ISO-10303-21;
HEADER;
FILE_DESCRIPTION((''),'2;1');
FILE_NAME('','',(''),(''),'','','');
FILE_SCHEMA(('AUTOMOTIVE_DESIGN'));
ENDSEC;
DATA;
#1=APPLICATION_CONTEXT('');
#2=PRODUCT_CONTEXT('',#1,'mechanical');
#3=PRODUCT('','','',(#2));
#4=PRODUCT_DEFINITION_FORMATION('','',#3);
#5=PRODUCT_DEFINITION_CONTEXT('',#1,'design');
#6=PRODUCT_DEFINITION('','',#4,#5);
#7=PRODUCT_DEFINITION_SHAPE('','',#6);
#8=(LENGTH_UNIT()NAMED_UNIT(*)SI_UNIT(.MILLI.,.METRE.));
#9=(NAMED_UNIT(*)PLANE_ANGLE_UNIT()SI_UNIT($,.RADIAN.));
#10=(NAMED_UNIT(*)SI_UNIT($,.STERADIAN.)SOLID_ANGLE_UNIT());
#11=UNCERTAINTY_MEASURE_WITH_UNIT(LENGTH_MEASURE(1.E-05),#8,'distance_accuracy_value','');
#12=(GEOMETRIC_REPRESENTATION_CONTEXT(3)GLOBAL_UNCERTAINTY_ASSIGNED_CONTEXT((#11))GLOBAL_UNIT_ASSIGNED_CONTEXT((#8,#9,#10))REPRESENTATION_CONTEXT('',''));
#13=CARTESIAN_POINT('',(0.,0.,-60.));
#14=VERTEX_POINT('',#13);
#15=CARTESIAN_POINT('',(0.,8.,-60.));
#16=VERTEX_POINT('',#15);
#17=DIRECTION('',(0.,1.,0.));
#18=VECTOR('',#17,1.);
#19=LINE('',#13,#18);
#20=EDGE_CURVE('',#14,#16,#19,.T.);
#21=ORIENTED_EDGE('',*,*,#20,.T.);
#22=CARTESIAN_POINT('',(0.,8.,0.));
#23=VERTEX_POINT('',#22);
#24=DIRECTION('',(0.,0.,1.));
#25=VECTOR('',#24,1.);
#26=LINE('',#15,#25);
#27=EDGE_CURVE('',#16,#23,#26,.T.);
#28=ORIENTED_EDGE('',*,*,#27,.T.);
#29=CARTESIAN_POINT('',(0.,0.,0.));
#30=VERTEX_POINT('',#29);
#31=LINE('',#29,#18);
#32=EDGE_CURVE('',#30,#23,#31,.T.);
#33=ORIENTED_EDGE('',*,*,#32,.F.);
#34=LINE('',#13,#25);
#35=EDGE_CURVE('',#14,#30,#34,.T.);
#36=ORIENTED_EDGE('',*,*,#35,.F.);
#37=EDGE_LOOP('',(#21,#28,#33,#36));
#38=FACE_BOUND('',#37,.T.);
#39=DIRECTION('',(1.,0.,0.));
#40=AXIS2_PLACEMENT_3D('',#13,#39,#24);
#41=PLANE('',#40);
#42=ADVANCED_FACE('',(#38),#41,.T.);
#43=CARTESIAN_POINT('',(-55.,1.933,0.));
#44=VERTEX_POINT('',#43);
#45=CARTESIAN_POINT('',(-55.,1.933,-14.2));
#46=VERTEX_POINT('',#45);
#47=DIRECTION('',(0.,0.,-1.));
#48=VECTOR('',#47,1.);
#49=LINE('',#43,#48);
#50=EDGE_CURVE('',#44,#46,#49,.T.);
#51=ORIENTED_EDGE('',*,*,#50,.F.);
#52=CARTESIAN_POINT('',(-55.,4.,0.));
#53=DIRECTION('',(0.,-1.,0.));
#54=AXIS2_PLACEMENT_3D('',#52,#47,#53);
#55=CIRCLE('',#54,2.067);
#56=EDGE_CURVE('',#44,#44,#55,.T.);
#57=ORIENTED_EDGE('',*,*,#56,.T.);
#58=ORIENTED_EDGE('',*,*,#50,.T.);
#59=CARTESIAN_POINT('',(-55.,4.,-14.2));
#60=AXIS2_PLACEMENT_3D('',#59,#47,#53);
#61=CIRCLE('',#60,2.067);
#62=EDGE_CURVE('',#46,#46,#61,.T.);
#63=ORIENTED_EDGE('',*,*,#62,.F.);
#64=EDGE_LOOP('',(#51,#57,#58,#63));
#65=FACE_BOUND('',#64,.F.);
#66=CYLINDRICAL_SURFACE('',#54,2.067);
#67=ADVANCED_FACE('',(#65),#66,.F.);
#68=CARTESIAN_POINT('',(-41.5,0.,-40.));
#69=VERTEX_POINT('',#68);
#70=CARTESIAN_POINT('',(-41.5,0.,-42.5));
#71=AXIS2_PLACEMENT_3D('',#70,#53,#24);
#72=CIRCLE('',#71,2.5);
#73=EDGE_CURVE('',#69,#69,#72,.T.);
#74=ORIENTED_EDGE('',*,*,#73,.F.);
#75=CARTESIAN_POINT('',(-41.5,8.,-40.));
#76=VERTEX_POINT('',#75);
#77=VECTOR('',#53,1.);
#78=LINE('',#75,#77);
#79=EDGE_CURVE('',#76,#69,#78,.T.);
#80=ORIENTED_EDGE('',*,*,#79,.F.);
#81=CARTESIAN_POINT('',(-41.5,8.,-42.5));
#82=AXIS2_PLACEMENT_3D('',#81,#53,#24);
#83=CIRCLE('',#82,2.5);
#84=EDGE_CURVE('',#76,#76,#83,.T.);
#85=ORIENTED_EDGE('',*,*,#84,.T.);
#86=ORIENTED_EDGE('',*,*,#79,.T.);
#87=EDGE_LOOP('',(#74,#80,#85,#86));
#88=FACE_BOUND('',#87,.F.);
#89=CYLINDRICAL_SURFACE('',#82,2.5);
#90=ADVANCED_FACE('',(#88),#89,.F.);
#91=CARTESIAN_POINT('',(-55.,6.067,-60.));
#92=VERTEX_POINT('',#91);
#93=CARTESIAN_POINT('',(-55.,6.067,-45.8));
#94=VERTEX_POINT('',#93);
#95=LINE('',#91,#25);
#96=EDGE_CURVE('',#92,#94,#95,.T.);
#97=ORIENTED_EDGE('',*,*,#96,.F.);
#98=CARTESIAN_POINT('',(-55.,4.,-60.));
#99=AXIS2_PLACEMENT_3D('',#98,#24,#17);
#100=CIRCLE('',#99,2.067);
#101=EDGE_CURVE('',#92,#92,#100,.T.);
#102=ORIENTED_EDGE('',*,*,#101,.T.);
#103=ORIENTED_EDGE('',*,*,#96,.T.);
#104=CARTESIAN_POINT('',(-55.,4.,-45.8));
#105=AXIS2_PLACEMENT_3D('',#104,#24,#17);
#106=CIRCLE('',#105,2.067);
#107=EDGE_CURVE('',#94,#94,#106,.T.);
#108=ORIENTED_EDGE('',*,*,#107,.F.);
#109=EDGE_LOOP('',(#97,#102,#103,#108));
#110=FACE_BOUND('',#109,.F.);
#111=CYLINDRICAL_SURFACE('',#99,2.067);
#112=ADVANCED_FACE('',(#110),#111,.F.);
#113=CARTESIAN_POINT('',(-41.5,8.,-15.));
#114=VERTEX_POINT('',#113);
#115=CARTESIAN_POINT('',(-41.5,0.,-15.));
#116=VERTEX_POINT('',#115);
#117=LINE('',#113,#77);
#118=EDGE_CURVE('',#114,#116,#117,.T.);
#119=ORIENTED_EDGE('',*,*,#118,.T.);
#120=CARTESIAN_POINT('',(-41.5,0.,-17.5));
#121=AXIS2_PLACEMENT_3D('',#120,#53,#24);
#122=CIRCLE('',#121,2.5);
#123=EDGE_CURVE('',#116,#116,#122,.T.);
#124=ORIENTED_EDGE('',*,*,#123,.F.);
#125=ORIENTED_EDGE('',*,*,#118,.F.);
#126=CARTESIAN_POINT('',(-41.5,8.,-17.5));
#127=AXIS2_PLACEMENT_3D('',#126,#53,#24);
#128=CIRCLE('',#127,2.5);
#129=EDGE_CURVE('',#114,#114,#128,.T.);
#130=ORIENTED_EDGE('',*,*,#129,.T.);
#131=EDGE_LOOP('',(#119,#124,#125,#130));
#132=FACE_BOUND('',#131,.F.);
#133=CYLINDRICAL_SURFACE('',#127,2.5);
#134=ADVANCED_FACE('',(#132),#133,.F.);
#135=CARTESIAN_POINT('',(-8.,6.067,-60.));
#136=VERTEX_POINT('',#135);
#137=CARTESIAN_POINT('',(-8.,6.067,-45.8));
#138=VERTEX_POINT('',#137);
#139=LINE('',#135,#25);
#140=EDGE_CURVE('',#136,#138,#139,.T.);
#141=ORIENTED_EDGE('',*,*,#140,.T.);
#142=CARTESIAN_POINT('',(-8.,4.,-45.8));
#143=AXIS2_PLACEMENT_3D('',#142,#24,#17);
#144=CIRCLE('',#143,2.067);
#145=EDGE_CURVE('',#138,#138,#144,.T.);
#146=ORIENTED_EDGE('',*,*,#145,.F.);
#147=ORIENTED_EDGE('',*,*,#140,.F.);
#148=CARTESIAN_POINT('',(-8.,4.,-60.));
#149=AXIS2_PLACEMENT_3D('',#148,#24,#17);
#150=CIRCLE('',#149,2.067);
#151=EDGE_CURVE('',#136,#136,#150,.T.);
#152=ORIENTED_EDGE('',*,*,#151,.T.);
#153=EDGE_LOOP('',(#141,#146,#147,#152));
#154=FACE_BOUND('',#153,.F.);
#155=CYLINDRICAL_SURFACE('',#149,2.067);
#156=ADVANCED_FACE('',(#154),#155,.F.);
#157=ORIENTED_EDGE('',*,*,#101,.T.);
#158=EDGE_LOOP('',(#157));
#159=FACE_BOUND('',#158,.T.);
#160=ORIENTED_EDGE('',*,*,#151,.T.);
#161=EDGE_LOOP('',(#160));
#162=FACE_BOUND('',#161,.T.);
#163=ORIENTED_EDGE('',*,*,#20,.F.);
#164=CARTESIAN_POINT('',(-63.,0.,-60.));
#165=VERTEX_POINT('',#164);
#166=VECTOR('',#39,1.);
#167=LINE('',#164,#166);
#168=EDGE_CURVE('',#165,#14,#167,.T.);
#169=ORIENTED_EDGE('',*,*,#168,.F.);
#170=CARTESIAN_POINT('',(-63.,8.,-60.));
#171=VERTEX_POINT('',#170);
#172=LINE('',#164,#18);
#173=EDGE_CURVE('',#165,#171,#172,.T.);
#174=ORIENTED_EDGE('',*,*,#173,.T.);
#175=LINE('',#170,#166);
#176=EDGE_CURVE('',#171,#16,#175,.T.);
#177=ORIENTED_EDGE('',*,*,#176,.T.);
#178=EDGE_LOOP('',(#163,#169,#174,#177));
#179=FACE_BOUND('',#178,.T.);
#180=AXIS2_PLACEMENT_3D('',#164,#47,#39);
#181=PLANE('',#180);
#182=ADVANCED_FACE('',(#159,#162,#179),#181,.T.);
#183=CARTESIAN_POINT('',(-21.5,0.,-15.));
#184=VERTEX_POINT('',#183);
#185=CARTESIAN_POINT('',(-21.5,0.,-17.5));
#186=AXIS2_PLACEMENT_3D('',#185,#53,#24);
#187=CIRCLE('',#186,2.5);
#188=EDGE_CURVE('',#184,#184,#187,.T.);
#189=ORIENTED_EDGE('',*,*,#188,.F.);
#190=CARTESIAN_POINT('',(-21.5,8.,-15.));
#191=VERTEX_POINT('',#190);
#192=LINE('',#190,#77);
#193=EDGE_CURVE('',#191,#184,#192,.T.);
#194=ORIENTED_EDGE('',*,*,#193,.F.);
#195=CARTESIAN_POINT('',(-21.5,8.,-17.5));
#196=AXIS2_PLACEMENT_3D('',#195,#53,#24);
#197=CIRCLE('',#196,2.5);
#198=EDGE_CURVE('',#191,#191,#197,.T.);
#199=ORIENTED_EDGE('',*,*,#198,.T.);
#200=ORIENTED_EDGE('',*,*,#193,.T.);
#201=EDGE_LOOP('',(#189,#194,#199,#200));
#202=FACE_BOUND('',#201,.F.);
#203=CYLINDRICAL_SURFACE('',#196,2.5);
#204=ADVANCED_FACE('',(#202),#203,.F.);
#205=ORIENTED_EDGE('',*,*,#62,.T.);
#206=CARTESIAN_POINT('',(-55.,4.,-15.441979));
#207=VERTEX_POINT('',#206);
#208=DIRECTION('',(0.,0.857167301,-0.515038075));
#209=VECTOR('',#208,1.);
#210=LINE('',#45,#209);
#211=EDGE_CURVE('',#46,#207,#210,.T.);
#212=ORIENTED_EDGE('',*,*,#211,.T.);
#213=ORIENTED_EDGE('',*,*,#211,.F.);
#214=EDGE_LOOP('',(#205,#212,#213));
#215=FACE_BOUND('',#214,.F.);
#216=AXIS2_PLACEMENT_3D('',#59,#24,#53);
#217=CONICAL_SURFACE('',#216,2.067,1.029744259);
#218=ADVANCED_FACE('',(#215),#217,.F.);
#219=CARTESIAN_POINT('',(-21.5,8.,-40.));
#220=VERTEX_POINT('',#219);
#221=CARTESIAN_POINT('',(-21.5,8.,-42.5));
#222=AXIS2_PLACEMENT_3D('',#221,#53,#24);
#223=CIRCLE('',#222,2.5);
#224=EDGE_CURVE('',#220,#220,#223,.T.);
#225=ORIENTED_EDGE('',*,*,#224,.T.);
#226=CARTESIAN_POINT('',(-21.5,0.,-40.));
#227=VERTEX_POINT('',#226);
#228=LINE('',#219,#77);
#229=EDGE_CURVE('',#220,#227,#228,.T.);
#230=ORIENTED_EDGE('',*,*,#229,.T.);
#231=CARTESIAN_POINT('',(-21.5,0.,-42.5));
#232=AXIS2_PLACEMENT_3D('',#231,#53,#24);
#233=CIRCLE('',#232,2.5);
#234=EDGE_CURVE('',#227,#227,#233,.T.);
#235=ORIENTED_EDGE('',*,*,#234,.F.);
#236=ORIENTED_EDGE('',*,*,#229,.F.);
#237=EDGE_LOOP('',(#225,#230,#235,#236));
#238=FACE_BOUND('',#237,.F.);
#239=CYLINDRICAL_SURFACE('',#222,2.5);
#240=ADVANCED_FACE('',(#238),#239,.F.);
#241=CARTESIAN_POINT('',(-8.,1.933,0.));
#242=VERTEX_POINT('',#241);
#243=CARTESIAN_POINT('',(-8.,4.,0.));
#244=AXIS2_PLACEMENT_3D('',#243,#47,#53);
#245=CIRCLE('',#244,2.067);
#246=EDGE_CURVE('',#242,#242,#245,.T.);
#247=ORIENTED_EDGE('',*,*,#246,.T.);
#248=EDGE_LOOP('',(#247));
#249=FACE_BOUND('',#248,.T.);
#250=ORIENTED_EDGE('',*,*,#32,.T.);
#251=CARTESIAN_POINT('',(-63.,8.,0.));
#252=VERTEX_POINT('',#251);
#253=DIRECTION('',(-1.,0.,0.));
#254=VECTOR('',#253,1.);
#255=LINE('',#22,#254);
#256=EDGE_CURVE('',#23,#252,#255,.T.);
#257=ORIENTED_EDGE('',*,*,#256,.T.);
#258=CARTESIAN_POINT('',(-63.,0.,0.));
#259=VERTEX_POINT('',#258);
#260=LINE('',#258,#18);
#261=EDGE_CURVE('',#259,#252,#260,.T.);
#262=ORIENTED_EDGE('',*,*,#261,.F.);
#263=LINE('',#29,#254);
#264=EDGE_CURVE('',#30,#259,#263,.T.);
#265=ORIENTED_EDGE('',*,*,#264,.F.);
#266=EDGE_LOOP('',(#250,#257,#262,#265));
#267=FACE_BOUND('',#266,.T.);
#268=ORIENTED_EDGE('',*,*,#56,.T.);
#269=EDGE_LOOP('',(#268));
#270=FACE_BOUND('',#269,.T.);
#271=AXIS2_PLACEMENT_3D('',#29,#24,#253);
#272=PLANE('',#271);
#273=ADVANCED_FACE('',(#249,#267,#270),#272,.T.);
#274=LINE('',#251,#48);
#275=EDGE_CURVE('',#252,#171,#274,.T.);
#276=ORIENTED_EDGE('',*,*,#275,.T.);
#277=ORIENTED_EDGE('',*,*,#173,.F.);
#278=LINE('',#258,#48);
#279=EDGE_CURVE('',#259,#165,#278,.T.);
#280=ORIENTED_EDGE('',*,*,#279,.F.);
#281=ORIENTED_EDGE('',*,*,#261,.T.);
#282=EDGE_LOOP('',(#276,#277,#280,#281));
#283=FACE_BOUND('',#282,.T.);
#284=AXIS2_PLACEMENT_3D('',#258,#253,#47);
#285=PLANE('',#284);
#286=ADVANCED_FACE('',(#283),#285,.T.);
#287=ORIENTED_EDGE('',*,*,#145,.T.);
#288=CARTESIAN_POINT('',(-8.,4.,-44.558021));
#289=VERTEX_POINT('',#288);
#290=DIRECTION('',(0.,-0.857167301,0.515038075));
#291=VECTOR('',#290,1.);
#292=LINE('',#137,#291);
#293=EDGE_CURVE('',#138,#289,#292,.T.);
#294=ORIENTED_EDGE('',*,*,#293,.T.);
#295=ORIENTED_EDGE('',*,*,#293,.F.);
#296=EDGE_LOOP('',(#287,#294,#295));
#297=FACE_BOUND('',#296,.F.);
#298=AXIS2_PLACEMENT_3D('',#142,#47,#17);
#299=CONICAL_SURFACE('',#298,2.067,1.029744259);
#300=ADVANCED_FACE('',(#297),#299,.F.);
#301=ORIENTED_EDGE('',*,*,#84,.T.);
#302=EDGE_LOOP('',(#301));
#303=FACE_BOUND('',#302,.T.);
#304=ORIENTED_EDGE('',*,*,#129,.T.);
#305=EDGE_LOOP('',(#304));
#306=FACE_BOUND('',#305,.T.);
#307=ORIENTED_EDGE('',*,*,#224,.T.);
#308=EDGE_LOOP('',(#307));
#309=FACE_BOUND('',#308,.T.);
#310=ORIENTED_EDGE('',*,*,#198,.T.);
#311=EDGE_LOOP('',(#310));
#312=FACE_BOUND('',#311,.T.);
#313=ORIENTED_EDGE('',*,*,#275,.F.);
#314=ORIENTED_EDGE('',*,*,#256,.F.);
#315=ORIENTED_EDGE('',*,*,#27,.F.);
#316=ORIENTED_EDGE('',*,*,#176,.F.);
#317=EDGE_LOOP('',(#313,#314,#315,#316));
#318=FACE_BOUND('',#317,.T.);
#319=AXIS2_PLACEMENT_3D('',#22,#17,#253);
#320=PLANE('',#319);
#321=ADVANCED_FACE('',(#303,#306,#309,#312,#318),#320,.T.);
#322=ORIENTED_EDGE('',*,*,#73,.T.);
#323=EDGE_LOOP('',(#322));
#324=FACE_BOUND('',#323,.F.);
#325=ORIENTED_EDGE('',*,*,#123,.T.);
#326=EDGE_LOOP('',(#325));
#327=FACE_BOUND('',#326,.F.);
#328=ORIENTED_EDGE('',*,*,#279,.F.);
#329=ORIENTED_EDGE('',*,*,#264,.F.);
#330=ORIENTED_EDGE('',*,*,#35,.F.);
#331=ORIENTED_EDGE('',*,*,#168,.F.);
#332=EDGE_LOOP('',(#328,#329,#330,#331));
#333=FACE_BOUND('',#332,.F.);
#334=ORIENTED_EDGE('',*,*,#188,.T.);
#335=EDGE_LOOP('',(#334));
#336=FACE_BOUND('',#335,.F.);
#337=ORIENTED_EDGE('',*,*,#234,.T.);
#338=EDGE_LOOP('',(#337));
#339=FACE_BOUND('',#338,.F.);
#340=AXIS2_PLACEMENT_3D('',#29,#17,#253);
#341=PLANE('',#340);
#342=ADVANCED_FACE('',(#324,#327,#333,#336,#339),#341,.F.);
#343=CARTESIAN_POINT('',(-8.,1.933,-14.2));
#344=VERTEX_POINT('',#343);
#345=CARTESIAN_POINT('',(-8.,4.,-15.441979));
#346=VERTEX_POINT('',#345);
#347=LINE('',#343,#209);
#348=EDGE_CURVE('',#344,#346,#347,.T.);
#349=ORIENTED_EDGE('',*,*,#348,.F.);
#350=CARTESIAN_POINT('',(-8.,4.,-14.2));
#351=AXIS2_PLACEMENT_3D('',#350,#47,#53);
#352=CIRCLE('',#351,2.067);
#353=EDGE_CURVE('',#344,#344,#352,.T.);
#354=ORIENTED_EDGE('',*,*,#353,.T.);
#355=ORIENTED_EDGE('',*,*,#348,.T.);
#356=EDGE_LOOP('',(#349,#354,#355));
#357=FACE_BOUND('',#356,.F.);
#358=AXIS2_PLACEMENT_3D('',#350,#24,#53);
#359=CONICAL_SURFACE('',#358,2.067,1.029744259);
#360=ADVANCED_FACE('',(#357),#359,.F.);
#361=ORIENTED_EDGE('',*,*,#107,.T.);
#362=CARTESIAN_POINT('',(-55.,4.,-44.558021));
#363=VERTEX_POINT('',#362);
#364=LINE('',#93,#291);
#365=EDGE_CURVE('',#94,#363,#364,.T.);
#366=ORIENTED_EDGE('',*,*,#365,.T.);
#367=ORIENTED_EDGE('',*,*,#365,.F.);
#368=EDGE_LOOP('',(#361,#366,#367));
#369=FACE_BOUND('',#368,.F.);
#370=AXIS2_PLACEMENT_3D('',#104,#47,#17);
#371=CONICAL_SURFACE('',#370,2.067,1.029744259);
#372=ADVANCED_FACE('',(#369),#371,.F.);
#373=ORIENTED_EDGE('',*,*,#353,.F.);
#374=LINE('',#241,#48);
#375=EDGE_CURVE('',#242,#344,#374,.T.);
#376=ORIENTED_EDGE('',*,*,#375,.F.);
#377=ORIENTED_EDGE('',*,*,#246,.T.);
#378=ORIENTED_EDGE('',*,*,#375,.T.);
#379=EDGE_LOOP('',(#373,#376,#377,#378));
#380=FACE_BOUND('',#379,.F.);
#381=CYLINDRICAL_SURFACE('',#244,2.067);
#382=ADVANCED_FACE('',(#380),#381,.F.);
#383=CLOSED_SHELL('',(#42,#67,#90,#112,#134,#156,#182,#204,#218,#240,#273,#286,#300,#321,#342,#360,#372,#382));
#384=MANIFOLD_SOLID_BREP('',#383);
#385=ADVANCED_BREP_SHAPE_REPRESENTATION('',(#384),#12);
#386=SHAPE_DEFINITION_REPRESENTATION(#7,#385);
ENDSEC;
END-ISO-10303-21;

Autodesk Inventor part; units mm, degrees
ref_plane "YZ Plane" through (0, 0, 0) normal (1, 0, 0) x (0, 1, 0)
ref_plane "XZ Plane" through (0, 0, 0) normal (0, 1, 0) x (-1, 0, 0)
ref_plane "XY Plane" through (0, 0, 0) normal (0, 0, 1) x (1, 0, 0)
sketch "Sketch5" plane through (0, 0, 0) normal (0, 1, 0) x (-1, 0, 0)
  line L0 (0, 0) -> (63, 0)
  line L1 (63, 0) -> (63, -60)
  line L2 (63, -60) -> (0, -60)
  line L3 (0, -60) -> (0, 0)
  dimension "d68" = 63
  dimension "d69" = 60
extrude "Extrusion2" add sketch "Sketch5" along normal blind 8
sketch "Sketch6" plane through (0, 8, 0) normal (0, 1, 0) x (1, 0, 0)
  line L0 (-63, 60) -> (-63, 0) projected
  line L1 (0, 60) -> (-63, 60) projected
  point P0 (0, 0)
  point P1 (-41.5, 42.5)
  point P2 (-41.5, 17.5)
  point P3 (-21.5, 42.5)
  point P4 (-21.5, 17.5)
  dimension "d74" = 25
  dimension "d77" = 20
  dimension "d80" = 63
  dimension "d81" = 60
  dimension "d82" = 21.5
  dimension "d83" = 17.5
hole "Hole3" at (-41.5, 8, -42.5) at (-41.5, 8, -17.5) at (-21.5, 8, -42.5) at (-21.5, 8, -17.5) direction (0, -1, 0) diameter 5 end through all
sketch "Sketch7" plane through (-63, 0, 0) normal (0, 0, 1) x (1, 0, 0)
  line L0 (0, 0) -> (0, 8) projected
  line L1 (63, 0) -> (63, 8) projected
  point P0 (55, 4)
  point P1 (8, 4)
  point P2 (0, 4)
  dimension "d91" = 8
  dimension "d92" = 8
hole "Hole4" at (-8, 4, 0) at (-55, 4, 0) direction (0, 0, -1) diameter 4.134 depth 14.2 tip angle 118 thread size "M5x0.8" class "6H" standard "ISO Metric profile"
sketch "Sketch8" plane through (0, 0, -60) normal (0, 0, -1) x (-1, 0, 0)
  circle A0 centre (8, 4) radius 2.067 projected
  circle A1 centre (55, 4) radius 2.067 projected
  point P0 (0, 0)
hole "Hole5" at (-8, 4, -60) at (-55, 4, -60) direction (0, 0, 1) diameter 4.134 depth 14.2 tip angle 118 thread size "M5x0.8" class "6H" standard "ISO Metric profile"
equation "\"d82\" = -0.5 * d77 + 0.5 * d80"
equation "\"d83\" = -0.5 * d74 + 0.5 * d81"
equation "\"d89\" = Thickness"
equation "\"BendRadius\" = Thickness"
equation "\"BendReliefWidth\" = Thickness"
equation "\"BendReliefDepth\" = 0.5 * Thickness"
equation "\"TransitionRadius\" = BendRadius"
equation "\"JacobiRadiusSize\" = BendRadius"
equation "\"GapSize\" = Thickness"
equation "\"Thickness\" = 5"
properties part number "Traseira da caixa de sustentação" material "Aluminum 6061"
